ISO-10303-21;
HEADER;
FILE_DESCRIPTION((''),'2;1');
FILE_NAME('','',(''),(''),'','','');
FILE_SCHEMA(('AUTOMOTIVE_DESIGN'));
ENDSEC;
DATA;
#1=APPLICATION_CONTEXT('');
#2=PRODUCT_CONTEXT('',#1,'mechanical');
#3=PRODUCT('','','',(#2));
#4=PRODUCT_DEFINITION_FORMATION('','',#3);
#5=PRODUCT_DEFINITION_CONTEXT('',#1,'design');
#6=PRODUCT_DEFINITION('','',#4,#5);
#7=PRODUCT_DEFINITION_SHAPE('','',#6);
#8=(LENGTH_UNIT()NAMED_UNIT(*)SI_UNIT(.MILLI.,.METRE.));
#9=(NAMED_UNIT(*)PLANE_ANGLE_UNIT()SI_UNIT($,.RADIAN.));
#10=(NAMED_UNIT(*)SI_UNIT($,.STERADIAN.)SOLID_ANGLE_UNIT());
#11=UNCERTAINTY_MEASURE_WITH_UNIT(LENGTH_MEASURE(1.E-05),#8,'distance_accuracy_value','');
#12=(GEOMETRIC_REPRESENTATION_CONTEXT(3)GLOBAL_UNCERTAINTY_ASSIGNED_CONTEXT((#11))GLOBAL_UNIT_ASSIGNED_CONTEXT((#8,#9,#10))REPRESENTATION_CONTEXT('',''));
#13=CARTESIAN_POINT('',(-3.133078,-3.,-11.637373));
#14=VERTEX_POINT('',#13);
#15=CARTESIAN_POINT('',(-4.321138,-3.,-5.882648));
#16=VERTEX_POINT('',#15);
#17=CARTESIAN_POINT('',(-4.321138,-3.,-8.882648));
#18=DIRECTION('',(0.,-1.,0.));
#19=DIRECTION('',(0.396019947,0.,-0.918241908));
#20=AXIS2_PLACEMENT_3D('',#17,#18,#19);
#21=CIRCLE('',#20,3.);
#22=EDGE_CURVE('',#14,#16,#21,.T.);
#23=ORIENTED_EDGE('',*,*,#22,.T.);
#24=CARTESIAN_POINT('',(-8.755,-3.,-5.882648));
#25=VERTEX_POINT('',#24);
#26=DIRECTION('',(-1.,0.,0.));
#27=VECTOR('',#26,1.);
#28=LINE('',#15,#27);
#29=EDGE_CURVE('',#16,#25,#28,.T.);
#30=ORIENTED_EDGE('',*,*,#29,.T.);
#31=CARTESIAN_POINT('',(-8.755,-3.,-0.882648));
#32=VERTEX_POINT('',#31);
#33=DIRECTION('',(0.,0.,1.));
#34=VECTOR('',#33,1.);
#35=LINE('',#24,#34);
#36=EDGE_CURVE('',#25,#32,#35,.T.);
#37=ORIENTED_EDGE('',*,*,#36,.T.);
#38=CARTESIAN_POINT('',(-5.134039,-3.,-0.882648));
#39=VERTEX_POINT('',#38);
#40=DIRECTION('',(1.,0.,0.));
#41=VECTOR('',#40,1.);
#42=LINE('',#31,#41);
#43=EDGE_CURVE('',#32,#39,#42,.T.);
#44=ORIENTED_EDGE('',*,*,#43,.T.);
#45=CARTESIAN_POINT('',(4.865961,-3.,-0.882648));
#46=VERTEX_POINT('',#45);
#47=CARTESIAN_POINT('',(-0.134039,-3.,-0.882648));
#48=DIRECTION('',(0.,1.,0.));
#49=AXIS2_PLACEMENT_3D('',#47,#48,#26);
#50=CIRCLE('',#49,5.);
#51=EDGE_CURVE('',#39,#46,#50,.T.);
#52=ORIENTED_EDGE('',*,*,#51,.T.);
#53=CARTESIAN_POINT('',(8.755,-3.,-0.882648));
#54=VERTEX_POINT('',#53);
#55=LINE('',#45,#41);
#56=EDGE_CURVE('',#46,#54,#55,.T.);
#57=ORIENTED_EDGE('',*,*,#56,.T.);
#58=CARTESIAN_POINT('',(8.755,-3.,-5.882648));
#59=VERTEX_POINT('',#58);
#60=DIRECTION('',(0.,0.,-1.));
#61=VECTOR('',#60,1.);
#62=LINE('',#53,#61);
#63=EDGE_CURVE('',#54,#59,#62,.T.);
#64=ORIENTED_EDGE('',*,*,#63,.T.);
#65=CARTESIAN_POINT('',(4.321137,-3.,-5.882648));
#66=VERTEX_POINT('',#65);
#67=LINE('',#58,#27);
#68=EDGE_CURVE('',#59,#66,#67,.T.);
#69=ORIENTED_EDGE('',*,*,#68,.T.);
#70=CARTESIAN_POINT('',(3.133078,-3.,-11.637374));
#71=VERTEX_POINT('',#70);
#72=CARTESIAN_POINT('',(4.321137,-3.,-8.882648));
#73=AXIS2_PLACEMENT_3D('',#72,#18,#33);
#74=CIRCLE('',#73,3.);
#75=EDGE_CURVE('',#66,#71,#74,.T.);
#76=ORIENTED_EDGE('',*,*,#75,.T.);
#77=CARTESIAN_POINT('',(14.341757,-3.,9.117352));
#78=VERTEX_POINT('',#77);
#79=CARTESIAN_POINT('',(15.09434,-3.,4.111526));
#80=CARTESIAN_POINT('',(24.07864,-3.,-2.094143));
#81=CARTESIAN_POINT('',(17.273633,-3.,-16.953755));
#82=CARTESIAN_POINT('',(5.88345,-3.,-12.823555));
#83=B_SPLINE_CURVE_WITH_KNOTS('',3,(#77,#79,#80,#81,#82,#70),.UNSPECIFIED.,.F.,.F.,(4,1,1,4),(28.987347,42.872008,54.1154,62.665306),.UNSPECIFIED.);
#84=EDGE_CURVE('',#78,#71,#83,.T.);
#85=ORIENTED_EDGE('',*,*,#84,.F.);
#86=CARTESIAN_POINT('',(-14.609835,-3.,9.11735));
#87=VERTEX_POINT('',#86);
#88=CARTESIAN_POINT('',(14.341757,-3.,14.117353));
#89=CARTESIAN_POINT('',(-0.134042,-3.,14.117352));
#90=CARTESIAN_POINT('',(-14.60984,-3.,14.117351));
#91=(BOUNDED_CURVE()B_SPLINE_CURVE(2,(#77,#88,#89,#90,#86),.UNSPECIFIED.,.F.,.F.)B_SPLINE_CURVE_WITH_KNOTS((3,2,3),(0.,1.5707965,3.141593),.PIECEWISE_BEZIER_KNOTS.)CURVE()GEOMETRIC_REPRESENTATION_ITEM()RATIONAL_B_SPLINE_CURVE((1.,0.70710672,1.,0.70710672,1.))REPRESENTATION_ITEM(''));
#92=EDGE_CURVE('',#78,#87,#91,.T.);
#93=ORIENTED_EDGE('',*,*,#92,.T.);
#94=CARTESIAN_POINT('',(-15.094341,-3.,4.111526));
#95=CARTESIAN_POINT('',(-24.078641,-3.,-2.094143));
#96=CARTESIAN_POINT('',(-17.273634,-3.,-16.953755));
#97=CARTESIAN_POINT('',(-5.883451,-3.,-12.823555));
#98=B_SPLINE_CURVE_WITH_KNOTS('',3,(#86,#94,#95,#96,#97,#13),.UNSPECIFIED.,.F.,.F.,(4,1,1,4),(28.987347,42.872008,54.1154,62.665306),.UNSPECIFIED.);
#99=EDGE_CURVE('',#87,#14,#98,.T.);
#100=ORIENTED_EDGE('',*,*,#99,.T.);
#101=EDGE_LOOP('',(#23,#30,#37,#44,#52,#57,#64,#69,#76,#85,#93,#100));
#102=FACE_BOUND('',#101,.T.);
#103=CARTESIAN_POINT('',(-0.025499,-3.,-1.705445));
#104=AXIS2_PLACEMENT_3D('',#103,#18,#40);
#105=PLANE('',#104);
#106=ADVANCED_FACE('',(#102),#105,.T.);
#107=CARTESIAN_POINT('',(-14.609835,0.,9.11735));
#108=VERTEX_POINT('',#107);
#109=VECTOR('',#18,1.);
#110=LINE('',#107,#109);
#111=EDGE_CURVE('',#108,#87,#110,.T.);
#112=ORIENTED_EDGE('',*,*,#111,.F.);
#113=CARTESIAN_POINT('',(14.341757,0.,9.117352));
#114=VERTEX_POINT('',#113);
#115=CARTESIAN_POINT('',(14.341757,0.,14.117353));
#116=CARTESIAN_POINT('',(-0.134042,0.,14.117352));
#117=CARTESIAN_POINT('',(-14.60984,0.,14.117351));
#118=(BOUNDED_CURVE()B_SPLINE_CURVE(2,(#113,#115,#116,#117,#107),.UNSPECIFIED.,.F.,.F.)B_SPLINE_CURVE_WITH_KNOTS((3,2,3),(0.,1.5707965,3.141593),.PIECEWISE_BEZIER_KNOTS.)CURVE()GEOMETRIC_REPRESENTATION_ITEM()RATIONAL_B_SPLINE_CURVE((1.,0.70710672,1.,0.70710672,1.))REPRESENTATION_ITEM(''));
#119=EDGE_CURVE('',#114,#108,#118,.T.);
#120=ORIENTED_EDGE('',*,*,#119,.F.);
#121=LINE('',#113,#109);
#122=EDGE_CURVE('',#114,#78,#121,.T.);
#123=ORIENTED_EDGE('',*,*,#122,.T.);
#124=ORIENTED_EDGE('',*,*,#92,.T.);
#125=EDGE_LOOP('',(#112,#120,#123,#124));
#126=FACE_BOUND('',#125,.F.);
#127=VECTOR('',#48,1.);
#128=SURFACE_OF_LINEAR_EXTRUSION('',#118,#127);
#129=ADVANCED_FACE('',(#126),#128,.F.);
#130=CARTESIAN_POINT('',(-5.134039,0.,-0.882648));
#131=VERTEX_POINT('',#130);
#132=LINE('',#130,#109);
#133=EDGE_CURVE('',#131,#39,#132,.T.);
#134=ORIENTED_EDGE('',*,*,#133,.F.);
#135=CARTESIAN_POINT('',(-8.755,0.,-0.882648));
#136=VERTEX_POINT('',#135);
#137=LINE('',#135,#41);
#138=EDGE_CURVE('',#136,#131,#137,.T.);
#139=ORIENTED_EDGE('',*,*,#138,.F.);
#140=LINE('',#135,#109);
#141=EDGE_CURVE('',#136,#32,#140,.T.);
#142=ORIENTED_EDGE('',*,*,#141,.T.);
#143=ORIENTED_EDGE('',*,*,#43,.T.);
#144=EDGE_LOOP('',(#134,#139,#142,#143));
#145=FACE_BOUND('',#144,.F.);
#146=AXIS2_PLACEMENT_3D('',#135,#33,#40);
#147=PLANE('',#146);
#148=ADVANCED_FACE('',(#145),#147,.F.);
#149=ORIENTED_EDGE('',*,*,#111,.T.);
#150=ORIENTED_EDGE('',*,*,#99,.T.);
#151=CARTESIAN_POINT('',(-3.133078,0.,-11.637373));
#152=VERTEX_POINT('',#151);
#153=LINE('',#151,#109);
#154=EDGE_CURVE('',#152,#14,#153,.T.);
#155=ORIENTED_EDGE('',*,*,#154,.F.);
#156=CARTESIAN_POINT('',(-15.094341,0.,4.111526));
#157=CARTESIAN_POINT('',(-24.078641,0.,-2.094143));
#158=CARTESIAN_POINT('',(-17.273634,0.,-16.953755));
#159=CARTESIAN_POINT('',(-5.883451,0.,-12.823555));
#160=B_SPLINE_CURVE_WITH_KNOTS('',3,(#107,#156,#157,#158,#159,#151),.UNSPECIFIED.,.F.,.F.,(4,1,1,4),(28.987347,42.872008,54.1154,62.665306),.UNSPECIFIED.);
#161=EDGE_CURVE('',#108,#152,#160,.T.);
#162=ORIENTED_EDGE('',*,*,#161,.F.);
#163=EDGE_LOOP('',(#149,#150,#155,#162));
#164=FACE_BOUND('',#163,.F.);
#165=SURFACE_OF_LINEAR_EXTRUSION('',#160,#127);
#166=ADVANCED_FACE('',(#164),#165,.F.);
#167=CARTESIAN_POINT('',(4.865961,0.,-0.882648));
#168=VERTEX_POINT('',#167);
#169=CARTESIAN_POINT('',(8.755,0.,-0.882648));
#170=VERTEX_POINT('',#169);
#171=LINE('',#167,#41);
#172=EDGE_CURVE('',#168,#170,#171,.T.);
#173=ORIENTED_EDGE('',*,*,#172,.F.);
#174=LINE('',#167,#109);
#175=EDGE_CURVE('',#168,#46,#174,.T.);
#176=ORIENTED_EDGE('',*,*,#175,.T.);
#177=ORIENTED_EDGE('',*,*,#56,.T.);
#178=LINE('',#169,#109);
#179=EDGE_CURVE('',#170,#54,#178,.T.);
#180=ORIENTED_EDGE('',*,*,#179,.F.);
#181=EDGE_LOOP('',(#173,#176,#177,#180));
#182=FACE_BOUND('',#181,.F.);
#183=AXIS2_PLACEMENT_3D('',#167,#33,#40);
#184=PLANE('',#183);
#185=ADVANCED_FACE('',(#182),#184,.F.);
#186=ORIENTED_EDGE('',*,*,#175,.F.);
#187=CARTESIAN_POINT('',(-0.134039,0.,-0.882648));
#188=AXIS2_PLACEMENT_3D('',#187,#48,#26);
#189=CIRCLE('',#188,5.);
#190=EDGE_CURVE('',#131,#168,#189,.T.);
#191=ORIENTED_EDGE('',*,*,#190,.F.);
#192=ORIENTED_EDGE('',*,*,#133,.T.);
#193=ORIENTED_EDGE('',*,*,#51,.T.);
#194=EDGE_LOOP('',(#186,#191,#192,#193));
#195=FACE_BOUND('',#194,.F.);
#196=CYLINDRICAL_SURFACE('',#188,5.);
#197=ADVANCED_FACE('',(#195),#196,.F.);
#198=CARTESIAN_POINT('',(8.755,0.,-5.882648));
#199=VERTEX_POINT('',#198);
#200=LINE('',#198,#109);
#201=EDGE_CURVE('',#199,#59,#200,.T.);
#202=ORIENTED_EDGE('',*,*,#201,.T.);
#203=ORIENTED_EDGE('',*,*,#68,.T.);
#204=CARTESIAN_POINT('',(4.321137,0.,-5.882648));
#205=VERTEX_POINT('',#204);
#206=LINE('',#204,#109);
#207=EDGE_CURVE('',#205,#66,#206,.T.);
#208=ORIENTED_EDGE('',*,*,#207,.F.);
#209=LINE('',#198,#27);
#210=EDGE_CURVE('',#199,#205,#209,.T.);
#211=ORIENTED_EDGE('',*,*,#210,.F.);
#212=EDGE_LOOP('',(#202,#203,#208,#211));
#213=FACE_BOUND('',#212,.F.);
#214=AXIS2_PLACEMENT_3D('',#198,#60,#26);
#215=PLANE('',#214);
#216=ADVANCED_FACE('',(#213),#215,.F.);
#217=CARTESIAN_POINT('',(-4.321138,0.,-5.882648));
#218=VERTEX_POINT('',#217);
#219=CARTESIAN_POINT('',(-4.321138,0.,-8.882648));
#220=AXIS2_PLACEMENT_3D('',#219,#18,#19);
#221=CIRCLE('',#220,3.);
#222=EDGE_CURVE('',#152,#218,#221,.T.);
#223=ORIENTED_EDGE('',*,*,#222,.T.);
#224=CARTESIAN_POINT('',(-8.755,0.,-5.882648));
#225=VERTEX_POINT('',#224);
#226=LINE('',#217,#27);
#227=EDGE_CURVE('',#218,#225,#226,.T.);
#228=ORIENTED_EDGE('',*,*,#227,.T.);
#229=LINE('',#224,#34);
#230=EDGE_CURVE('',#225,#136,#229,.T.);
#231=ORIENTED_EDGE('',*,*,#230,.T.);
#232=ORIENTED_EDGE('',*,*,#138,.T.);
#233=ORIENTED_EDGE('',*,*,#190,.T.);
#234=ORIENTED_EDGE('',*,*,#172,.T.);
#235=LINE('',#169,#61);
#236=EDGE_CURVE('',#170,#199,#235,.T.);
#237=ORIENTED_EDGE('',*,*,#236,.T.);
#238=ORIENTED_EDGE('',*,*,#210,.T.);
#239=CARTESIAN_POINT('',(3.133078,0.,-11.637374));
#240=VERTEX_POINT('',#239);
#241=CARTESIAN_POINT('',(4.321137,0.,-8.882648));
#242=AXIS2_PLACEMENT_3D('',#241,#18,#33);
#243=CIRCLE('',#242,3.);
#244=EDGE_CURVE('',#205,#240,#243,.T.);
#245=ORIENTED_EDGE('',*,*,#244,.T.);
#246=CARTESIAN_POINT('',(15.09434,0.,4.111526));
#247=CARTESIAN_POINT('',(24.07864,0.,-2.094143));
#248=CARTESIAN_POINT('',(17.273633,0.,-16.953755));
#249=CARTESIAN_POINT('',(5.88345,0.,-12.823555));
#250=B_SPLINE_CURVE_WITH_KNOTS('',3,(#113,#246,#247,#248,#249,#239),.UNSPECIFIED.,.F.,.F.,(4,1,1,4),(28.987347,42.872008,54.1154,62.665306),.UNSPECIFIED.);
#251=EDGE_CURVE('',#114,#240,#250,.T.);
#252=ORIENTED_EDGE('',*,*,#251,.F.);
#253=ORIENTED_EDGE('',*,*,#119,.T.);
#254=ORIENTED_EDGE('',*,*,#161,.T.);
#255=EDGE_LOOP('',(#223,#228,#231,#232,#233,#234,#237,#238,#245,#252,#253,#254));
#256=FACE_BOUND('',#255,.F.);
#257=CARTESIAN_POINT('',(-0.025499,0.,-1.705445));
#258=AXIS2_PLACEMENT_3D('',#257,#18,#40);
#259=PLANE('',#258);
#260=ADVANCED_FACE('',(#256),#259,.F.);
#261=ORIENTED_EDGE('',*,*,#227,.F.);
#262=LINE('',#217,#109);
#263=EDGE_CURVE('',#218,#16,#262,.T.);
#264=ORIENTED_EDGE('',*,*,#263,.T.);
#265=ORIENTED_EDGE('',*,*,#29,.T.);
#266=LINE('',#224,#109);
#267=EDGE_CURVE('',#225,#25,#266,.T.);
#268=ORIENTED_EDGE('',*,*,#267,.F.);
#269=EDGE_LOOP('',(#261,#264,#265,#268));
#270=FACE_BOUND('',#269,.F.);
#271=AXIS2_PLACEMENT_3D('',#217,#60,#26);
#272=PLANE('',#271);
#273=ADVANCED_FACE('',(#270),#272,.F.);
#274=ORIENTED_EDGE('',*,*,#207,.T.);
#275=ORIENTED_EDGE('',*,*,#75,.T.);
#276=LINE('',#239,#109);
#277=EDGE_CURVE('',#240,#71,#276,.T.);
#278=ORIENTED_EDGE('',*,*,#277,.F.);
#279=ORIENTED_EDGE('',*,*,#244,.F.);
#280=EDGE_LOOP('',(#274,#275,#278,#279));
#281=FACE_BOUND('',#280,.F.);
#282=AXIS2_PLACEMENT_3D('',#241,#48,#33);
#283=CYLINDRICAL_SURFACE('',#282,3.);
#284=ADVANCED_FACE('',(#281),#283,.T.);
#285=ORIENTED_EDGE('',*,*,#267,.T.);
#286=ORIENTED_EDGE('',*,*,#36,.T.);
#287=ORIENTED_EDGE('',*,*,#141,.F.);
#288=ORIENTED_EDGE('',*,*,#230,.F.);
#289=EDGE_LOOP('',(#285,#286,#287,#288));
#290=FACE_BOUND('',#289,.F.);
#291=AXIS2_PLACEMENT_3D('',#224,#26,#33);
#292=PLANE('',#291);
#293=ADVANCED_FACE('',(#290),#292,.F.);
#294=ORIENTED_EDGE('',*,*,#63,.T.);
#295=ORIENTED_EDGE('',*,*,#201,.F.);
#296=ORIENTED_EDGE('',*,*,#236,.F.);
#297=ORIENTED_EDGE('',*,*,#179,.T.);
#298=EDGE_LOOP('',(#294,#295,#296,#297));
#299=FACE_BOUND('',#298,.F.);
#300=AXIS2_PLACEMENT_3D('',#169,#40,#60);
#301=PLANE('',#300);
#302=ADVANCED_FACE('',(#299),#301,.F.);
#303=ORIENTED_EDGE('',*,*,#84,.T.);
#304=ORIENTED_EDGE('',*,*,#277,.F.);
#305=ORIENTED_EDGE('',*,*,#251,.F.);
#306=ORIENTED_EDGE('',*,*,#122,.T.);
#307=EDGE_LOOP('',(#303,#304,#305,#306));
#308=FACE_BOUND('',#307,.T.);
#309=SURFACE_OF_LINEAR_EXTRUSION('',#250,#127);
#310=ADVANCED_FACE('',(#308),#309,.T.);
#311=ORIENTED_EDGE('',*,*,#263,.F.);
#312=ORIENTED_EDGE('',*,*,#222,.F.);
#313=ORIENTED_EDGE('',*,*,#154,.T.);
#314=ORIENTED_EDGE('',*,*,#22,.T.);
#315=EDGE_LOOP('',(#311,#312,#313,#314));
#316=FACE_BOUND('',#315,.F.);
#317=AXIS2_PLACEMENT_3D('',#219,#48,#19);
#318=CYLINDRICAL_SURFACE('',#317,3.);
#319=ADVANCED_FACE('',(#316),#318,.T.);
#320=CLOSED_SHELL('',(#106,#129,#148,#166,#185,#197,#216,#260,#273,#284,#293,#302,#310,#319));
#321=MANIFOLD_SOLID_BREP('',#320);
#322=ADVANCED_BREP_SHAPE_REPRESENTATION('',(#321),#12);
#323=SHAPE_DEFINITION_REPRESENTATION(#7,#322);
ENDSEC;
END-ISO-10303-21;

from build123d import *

# Parameters (mm, degrees)
F1_DEPTH = 3


# Not quite as in the source:
# - ends of sketch curves that miss each other by under 0.0002 mm in the source are joined
# - the dataset's text gives a spline's control points without its knots; the knots are read off the source's solid


with BuildPart() as f1:
    # F0 (on Front) → F1 (new body)
    with BuildSketch(Plane.XZ):
        with BuildLine():
            Line((-4.321138, -5.882648), (-8.755, -5.882648))
            Line((-8.755, -5.882648), (-8.755, -0.882648))
            Line((-8.755, -0.882648), (-5.134039, -0.882648))
            ThreePointArc((-5.134039, -0.882648), (-0.134039, 4.117352), (4.865961, -0.882648))
            Line((4.865961, -0.882648), (8.755, -0.882648))
            Line((8.755, -0.882648), (8.755, -5.882648))
            Line((8.755, -5.882648), (4.321137, -5.882648))
            ThreePointArc((4.321137, -5.882648), (1.3830953266, -8.2760912214), (3.1330776048, -11.6373739162))
            add(Edge.make_bspline(
                [(14.341757, 9.117352), (15.09434, 4.111526), (24.07864, -2.094143), (17.273633, -16.953755), (5.88345, -12.823555), (3.1330776048, -11.6373739162)],
                knots=[28.987347, 28.987347, 28.987347, 28.987347, 42.872008, 54.1154, 62.665306, 62.665306, 62.665306, 62.665306], degree=3))
            add(Edge.make_bspline(
                [(14.341757, 9.117352), (14.341757, 14.117352866), (-0.1340415073, 14.117352), (-14.6098400146, 14.117351134), (-14.609835, 9.1173502679)],
                knots=[0, 0, 0, 1.5707965, 1.5707965, 3.141593, 3.141593, 3.141593], degree=2, weights=[1, 0.7071067199, 1, 0.7071067199, 1]))
            add(Edge.make_bspline(
                [(-14.609835, 9.1173502679), (-15.094341, 4.111526), (-24.078641, -2.094143), (-17.273634, -16.953755), (-5.883451, -12.823555), (-3.133078, -11.637373)],
                knots=[28.987347, 28.987347, 28.987347, 28.987347, 42.872008, 54.1154, 62.665306, 62.665306, 62.665306, 62.665306], degree=3))
            ThreePointArc((-3.133078, -11.637373), (-1.3830964195, -8.2760907718), (-4.321138, -5.882648))
        make_face()
    extrude(amount=F1_DEPTH)


solid = f1.part
